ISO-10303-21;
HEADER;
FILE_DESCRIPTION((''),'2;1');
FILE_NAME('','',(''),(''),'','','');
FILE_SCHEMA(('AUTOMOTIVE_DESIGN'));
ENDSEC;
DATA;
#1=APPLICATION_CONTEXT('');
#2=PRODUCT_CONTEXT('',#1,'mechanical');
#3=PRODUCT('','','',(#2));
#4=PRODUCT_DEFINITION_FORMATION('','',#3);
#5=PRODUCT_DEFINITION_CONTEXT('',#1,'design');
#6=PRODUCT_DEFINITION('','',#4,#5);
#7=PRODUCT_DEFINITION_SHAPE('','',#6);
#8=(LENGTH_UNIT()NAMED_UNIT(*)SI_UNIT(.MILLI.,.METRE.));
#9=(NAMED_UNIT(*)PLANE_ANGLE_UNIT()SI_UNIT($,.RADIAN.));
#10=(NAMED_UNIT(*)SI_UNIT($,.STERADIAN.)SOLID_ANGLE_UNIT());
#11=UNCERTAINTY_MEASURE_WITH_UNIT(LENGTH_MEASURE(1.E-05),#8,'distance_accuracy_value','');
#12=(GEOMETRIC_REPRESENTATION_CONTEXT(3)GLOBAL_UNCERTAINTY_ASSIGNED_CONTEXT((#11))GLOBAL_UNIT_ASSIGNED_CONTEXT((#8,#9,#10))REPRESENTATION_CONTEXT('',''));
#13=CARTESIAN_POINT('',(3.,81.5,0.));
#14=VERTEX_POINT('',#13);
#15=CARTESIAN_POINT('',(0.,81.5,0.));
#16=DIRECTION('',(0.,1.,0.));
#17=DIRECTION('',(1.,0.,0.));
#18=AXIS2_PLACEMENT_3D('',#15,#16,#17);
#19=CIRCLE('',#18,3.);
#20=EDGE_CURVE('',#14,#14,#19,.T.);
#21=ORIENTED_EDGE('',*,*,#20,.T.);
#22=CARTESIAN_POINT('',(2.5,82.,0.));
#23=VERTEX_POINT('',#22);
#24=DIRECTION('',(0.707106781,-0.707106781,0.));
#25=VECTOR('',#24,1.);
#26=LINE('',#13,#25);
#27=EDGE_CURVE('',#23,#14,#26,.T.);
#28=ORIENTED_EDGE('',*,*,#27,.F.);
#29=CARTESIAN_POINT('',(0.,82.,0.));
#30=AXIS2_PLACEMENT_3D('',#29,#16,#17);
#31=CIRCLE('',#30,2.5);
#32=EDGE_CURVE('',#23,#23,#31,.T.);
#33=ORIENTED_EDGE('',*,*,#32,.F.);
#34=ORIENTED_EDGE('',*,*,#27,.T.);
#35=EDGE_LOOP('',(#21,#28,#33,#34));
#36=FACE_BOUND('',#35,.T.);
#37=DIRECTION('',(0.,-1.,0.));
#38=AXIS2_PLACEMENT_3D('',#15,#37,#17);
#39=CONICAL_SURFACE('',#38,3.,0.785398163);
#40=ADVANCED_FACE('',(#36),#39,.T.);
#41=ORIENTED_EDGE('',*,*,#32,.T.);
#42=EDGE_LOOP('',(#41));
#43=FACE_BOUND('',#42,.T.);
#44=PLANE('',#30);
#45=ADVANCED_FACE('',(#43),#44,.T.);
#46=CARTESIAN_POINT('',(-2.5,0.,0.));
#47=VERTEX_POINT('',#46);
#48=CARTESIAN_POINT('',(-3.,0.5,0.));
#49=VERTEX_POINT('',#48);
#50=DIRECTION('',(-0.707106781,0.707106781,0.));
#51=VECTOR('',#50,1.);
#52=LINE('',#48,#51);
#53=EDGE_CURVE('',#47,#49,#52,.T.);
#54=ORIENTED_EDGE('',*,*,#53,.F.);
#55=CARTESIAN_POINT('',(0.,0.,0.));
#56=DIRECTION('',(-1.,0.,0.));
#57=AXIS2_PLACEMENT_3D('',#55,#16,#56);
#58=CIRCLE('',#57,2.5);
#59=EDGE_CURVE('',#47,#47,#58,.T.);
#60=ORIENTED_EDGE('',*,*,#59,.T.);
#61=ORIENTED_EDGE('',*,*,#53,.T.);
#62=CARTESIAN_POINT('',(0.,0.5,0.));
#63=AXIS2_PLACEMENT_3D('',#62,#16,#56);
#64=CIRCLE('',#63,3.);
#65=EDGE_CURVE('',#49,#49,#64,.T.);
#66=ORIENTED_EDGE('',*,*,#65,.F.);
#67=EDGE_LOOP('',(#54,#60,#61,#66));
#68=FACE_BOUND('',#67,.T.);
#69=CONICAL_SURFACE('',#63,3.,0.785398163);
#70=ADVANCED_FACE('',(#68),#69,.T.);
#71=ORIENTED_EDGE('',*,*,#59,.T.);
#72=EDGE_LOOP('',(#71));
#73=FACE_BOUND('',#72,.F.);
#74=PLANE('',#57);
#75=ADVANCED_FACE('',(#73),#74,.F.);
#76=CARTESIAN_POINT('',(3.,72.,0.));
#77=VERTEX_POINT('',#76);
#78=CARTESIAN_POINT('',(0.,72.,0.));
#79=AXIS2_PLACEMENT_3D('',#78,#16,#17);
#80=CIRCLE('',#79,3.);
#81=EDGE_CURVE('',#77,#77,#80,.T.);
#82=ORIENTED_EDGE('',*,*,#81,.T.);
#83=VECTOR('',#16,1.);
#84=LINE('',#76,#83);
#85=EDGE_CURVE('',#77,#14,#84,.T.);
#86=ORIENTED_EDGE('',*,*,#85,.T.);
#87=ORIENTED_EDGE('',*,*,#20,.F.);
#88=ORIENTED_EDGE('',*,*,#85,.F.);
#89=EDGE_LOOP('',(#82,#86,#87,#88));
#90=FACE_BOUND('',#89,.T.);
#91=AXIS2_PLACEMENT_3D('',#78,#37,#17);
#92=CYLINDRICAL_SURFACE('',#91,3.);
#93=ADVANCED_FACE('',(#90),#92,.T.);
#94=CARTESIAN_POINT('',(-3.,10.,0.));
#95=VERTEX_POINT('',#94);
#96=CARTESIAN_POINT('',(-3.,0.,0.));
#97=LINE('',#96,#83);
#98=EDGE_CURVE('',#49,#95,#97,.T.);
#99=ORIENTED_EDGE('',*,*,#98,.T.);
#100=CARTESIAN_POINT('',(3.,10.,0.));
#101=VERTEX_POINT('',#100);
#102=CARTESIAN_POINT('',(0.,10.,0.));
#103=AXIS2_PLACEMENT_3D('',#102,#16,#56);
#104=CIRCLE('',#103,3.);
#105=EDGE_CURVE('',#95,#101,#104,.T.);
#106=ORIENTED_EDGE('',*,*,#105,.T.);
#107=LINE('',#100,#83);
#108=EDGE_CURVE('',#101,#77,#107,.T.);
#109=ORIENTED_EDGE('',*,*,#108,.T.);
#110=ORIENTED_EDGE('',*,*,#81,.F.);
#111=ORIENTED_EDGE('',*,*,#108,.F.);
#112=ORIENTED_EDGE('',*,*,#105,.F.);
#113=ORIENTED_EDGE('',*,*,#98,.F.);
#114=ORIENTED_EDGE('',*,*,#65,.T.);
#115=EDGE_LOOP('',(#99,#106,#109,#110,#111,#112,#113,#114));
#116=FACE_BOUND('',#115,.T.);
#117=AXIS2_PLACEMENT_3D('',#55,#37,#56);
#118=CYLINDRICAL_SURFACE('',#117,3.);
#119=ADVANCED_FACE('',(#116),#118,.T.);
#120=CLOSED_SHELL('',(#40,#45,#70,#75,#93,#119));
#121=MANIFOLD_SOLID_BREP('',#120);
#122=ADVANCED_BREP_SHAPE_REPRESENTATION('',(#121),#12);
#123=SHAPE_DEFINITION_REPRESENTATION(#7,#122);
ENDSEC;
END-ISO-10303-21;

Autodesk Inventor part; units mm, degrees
ref_plane "YZ Plane" through (0, 0, 0) normal (1, 0, 0) x (0, 1, 0)
ref_plane "XZ Plane" through (0, 0, 0) normal (0, 1, 0) x (-1, 0, 0)
ref_plane "XY Plane" through (0, 0, 0) normal (0, 0, 1) x (1, 0, 0)
sketch "Sketch1" plane through (0, 0, 0) normal (0, 1, 0) x (-1, 0, 0)
  circle A0 centre (0, 0) radius 3
  dimension "d3" = 6
extrude "Extrusion2" add sketch "Sketch1" along normal blind 10
thread "Thread1" size "M6x1" class "6g" standard "ANSI Metric M Profile" length 10
sketch "Sketch3" plane through (0, 10, 0) normal (0, 1, 0) x (1, 0, 0)
  circle A0 centre (0, 0) radius 3
  dimension "d8" = 6
extrude "Extrusion3" add sketch "Sketch3" along normal blind 62
sketch "Sketch4" plane through (0, 72, 0) normal (0, 1, 0) x (1, 0, 0)
  circle A0 centre (0, 0) radius 3 projected
  circle A1 centre (0, 0) radius 3
  dimension "d11" = 6
extrude "Extrusion4" add sketch "Sketch4" along normal blind 10
thread "Thread2" size "M6x1" class "6g" standard "ANSI Metric M Profile" length 10
chamfer "Chamfer1" distance 0.5 distance2 0.5 1 edges at (-3, 82, 0) measured on face at (-0.5351, 82, -1.0949)
chamfer "Chamfer2" distance 0.5 distance2 0.5 1 edges at (3, 0, 0) measured on face at (0.5351, 0, 1.0949)
properties part number "cylinder head bolt"
